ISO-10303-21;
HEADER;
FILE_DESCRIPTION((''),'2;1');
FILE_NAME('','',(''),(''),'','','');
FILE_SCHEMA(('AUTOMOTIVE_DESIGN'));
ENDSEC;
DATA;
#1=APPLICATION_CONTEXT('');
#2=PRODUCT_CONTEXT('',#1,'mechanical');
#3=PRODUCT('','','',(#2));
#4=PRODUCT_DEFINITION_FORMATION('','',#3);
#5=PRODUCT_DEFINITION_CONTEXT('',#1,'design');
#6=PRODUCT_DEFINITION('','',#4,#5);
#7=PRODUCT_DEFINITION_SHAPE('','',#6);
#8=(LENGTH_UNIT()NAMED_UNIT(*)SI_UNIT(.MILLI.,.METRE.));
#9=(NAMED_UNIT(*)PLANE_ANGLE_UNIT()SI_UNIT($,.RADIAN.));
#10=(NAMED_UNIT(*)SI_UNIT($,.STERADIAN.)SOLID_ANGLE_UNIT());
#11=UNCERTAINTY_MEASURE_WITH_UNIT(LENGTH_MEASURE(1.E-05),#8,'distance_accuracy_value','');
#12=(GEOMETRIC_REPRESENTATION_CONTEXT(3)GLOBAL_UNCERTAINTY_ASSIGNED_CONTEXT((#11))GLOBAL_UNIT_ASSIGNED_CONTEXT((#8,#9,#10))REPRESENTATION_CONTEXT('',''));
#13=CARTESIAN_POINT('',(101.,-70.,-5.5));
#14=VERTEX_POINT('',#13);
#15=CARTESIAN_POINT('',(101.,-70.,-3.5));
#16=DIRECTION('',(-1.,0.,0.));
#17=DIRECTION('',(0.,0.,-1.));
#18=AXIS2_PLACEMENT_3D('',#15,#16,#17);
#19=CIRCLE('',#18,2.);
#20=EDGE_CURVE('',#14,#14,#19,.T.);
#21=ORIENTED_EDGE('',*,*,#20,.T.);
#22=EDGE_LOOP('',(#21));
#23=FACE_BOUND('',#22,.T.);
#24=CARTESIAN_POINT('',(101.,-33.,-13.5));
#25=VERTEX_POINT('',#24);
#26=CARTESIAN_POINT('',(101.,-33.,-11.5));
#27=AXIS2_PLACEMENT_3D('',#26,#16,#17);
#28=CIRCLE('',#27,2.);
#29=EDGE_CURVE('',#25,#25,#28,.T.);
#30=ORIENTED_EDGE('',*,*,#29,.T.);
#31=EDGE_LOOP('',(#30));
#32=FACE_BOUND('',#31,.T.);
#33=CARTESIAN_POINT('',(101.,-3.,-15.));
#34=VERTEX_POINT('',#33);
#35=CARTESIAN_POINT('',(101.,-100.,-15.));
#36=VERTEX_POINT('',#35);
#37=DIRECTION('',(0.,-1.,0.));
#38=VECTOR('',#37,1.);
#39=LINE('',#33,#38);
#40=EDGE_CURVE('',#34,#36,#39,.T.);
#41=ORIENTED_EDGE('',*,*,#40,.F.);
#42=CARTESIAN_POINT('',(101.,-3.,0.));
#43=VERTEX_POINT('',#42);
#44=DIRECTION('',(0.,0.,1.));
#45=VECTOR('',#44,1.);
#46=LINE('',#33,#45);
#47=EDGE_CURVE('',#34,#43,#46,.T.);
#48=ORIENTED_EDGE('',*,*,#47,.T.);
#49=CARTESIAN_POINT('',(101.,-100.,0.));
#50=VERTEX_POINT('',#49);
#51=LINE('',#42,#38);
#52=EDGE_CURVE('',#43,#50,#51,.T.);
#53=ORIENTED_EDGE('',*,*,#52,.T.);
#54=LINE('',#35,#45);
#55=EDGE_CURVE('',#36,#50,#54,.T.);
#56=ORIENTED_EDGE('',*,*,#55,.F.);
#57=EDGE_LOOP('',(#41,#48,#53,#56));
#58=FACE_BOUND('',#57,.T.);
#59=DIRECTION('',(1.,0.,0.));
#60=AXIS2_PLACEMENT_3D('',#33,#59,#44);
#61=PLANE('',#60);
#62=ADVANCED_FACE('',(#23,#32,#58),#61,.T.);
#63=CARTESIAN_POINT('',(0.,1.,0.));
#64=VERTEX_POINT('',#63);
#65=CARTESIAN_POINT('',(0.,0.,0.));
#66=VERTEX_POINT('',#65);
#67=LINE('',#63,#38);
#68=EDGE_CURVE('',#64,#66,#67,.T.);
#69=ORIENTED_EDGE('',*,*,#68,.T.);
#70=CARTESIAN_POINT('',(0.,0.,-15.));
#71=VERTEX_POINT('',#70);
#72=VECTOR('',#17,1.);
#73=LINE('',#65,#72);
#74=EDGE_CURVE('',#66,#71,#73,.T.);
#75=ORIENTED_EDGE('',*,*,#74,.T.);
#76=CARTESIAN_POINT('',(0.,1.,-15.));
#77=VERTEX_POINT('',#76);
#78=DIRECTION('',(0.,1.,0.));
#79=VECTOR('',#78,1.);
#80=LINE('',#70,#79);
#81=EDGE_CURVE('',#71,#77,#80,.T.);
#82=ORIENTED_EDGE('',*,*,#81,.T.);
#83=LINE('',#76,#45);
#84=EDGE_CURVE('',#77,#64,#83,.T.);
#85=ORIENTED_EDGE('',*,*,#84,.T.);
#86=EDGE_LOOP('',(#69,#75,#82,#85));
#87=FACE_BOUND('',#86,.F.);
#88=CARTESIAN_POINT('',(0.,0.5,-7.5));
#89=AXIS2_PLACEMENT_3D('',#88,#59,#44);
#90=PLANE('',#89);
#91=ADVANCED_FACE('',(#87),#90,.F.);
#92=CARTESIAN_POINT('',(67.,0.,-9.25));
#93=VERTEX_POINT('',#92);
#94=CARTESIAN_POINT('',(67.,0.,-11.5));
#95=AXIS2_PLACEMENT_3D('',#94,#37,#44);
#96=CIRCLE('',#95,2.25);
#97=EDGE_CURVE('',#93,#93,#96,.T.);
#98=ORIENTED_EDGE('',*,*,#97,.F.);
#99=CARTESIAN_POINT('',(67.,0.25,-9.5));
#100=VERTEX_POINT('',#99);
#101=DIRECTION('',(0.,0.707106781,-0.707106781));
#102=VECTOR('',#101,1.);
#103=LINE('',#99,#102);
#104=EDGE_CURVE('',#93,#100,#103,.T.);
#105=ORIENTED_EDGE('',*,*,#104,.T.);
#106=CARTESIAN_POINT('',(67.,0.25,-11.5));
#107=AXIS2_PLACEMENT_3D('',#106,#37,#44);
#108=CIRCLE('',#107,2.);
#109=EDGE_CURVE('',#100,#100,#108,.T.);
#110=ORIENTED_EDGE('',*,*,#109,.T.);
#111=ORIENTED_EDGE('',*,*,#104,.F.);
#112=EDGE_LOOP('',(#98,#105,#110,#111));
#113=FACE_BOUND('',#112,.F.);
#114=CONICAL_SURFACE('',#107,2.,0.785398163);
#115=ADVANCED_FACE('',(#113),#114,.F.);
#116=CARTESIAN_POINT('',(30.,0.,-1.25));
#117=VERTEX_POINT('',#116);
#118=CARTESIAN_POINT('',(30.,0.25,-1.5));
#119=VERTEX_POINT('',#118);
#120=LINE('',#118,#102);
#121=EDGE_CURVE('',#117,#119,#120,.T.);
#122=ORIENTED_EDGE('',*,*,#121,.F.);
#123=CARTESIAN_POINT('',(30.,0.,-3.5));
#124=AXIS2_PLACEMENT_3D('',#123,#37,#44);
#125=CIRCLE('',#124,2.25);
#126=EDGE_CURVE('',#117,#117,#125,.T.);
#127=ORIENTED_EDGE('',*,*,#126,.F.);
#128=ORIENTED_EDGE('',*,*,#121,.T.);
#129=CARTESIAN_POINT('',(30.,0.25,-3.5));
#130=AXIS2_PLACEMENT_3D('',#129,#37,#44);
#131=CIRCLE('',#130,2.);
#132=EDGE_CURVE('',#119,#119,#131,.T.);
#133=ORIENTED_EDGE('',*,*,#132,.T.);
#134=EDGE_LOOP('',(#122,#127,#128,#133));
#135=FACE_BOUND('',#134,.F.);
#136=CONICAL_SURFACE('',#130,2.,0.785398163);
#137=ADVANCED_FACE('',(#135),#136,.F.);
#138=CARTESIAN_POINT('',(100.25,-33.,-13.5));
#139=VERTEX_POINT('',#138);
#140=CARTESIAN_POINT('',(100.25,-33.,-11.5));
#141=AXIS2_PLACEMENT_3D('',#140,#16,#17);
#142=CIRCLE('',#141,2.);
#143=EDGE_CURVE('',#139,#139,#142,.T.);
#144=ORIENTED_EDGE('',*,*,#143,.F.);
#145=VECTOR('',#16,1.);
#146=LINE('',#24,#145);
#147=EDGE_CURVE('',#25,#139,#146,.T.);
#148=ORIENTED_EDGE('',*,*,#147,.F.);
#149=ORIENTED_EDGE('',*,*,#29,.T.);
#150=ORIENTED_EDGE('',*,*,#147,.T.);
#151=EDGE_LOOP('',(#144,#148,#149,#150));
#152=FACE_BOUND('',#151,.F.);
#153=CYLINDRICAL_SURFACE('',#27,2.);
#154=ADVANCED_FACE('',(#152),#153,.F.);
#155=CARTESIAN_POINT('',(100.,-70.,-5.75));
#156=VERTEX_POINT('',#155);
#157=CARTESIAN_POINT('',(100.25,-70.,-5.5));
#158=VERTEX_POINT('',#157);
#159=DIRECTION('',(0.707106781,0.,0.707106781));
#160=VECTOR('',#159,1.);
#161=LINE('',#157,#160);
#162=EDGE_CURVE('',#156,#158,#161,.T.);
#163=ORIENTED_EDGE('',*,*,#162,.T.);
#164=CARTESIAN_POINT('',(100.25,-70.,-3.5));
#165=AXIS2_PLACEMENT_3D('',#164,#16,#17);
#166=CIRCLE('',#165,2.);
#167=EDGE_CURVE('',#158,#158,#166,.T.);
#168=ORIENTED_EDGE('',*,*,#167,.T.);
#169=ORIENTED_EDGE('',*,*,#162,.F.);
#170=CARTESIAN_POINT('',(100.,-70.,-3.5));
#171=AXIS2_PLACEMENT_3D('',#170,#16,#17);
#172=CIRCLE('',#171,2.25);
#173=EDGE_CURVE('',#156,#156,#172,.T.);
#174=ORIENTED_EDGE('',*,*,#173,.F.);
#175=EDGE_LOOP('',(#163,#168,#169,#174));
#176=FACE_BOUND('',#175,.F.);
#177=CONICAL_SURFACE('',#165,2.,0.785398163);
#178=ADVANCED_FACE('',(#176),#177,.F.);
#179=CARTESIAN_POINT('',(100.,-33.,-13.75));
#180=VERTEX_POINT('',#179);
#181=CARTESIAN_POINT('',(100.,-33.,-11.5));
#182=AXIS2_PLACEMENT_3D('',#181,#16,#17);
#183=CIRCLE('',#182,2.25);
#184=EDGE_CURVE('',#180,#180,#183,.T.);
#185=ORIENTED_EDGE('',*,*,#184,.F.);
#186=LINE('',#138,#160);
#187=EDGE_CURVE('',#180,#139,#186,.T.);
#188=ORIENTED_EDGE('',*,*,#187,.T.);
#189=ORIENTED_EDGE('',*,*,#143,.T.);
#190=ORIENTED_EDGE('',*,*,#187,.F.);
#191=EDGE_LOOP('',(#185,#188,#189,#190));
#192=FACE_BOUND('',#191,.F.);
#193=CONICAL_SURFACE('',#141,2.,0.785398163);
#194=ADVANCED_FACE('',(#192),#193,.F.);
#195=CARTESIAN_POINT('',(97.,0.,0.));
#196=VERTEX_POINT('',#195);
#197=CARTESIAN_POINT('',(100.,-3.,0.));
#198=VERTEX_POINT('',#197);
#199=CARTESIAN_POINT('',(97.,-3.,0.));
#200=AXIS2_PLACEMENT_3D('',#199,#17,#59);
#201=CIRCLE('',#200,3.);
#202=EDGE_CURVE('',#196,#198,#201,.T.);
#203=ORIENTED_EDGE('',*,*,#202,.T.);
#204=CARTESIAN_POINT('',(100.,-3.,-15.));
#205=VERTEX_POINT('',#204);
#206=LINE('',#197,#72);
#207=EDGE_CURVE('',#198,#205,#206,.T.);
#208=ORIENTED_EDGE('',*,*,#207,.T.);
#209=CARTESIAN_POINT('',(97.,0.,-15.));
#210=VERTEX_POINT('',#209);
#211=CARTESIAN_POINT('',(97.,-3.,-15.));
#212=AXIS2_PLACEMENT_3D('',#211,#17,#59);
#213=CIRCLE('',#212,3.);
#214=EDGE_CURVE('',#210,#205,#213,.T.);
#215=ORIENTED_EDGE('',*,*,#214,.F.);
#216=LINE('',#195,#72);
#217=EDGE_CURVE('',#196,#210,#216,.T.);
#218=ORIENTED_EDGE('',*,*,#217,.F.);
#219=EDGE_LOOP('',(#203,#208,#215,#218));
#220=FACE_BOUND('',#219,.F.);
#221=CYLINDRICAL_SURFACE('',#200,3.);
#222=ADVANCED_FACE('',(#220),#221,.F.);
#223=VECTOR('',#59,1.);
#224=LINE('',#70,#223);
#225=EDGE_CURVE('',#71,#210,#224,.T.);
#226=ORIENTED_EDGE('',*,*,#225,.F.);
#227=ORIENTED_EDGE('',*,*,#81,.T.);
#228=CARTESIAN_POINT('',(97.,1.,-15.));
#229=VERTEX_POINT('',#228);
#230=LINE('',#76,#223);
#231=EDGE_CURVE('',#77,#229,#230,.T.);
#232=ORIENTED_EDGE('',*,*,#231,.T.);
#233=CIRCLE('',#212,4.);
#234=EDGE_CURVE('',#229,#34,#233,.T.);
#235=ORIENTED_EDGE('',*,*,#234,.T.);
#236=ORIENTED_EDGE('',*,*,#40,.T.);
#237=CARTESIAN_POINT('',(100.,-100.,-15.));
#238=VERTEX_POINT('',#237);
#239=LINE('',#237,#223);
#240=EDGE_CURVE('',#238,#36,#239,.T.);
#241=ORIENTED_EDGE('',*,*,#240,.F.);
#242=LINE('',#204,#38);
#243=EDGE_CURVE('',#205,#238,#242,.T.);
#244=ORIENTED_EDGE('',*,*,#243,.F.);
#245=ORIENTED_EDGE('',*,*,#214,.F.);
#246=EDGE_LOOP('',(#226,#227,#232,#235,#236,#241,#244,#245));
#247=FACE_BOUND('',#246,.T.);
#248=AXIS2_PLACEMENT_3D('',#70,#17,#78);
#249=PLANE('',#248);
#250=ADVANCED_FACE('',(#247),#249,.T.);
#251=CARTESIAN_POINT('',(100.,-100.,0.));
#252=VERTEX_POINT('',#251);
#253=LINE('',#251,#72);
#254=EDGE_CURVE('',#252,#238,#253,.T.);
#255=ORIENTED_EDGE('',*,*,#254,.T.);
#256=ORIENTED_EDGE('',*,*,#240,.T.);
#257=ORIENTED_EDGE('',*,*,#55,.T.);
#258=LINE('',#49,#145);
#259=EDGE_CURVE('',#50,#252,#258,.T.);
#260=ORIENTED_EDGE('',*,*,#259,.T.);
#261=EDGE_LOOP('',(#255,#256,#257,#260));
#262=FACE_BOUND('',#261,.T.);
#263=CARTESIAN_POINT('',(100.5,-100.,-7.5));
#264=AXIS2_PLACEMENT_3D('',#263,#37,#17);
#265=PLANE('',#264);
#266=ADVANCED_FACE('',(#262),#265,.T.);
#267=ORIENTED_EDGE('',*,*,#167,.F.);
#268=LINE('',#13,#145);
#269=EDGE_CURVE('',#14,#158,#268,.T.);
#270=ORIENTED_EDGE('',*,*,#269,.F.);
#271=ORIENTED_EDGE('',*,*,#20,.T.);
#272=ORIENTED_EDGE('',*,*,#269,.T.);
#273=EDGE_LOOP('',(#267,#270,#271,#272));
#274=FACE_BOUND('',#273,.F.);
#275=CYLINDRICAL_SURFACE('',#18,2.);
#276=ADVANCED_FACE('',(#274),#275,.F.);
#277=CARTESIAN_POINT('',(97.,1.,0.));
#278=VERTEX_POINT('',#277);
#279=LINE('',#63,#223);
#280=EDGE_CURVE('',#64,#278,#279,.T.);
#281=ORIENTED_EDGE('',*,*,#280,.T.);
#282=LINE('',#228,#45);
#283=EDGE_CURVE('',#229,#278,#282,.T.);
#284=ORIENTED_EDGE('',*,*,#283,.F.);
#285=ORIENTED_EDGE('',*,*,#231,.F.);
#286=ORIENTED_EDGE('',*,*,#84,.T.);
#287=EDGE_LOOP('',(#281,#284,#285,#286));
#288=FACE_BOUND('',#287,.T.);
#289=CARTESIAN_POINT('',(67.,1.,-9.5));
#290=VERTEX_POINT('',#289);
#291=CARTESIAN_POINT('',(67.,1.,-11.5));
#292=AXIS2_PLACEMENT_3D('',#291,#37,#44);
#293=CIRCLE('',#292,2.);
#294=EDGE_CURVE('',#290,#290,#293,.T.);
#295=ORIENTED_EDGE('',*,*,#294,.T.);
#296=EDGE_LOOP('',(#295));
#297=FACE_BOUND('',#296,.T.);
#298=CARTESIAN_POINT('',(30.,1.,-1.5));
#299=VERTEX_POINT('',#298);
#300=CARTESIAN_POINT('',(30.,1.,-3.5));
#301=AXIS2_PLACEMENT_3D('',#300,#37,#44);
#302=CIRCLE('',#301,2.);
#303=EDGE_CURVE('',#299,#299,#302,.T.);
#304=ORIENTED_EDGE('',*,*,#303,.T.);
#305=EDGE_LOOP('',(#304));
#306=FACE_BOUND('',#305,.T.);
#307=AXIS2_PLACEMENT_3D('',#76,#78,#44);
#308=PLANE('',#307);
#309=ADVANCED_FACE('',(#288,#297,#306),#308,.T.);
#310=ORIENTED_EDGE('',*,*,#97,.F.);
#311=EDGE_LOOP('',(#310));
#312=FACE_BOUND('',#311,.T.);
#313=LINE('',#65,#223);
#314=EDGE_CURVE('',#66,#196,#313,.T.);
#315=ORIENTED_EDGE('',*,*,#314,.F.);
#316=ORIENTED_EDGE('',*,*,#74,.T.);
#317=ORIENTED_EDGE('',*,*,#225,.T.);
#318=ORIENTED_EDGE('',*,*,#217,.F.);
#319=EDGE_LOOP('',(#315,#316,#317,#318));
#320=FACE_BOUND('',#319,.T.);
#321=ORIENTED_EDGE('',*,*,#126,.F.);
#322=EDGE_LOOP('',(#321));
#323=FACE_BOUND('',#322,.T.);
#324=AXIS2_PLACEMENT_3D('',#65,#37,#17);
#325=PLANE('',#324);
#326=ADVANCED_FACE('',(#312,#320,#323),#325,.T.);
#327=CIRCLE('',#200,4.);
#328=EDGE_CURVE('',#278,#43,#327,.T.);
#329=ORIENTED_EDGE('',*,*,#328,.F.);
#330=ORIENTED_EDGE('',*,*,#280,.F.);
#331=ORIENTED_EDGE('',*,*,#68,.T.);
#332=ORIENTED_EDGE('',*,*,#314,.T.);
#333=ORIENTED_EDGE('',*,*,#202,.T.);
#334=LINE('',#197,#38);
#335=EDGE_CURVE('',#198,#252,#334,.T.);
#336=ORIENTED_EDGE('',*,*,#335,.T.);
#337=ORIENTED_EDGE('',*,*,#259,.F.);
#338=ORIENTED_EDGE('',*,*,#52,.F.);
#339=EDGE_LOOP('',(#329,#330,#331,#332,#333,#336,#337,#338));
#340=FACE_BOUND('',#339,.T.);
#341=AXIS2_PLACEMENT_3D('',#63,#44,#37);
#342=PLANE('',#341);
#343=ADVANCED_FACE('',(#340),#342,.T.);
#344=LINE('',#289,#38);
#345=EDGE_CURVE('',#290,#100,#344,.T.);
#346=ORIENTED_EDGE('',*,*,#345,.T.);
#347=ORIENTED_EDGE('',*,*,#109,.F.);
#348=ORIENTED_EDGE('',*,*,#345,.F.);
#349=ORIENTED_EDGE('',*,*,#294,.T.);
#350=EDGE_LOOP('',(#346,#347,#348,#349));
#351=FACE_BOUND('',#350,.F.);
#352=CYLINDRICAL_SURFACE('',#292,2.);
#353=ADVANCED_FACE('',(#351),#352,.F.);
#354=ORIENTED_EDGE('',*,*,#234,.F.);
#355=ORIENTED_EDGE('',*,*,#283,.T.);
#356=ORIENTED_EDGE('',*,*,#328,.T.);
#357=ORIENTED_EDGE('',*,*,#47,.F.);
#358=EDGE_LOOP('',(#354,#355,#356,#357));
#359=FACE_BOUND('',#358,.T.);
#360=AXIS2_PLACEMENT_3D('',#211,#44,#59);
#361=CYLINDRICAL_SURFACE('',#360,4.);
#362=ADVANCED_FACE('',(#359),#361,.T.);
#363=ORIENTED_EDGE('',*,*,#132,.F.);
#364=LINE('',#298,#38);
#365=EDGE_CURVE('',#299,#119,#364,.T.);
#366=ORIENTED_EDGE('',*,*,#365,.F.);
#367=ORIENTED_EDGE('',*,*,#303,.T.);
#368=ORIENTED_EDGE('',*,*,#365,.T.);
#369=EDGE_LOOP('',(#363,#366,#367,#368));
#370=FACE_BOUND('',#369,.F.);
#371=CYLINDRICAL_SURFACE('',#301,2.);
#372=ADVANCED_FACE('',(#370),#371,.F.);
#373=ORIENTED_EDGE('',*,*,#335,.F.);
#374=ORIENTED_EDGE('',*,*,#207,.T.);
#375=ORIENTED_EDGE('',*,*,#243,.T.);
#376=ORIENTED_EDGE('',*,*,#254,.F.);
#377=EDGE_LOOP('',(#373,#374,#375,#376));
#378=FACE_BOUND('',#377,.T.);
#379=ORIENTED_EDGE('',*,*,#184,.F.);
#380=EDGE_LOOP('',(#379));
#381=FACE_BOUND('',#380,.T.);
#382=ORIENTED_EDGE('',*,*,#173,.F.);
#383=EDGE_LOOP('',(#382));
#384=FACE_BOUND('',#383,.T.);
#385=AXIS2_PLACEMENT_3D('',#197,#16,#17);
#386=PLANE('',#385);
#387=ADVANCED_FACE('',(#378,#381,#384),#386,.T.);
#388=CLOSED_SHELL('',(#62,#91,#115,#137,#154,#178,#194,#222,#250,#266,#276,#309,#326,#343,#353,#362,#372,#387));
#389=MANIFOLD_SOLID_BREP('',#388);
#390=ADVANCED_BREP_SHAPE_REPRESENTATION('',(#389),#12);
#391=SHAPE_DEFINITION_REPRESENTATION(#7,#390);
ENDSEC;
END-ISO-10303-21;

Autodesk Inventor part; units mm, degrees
ref_plane "YZ Plane" through (0, 0, 0) normal (1, 0, 0) x (0, 1, 0)
ref_plane "XZ Plane" through (0, 0, 0) normal (0, 1, 0) x (-1, 0, 0)
ref_plane "XY Plane" through (0, 0, 0) normal (0, 0, 1) x (1, 0, 0)
sketch "Sketch1" plane through (0, 0, 0) normal (0, 0, 1) x (1, 0, 0)
  line L0 (0, 0) -> (97, 0)
  line L1 (100, -3) -> (100, -100)
  arc A0 (100, -3) -> (97, 0) centre (97, -3) ccw
  point P0 (100, 0)
  dimension "d0" = 100
  dimension "d1" = 100
  dimension "d7" = 3
sketch "Sketch2" plane through (0, 0, 0) normal (1, 0, 0) x (0, 1, 0)
  line L0 (0, 0) -> (0, -15)
  line L1 (0, -15) -> (1, -15)
  line L2 (1, -15) -> (1, 0)
  line L3 (1, 0) -> (0, 0)
  dimension "d2" = 15
  dimension "d3" = 1
  dimension "d4" = 15
sweep "Sweep1" add profiles "Sketch2" path "Sketch1"
hole "Hole1" at (30, 1, -3.5) direction (0, -1, 0) diameter 4 end through all
hole "Hole2" at (67, 1, -11.5) direction (0, -1, 0) diameter 4 end through all
hole "Hole3" at (101, -33, -11.5) direction (-1, 0, 0) diameter 4 end through all
hole "Hole4" at (101, -70, -3.5) direction (-1, 0, 0) diameter 4 end through all
chamfer "Chamfer1" distance 0.25 angle 45 4 edges at (30, 0, -5.5) (67, 0, -13.5) (100, -33, -9.5) (100, -70, -1.5)
properties part number "80mmCornerBracket"
